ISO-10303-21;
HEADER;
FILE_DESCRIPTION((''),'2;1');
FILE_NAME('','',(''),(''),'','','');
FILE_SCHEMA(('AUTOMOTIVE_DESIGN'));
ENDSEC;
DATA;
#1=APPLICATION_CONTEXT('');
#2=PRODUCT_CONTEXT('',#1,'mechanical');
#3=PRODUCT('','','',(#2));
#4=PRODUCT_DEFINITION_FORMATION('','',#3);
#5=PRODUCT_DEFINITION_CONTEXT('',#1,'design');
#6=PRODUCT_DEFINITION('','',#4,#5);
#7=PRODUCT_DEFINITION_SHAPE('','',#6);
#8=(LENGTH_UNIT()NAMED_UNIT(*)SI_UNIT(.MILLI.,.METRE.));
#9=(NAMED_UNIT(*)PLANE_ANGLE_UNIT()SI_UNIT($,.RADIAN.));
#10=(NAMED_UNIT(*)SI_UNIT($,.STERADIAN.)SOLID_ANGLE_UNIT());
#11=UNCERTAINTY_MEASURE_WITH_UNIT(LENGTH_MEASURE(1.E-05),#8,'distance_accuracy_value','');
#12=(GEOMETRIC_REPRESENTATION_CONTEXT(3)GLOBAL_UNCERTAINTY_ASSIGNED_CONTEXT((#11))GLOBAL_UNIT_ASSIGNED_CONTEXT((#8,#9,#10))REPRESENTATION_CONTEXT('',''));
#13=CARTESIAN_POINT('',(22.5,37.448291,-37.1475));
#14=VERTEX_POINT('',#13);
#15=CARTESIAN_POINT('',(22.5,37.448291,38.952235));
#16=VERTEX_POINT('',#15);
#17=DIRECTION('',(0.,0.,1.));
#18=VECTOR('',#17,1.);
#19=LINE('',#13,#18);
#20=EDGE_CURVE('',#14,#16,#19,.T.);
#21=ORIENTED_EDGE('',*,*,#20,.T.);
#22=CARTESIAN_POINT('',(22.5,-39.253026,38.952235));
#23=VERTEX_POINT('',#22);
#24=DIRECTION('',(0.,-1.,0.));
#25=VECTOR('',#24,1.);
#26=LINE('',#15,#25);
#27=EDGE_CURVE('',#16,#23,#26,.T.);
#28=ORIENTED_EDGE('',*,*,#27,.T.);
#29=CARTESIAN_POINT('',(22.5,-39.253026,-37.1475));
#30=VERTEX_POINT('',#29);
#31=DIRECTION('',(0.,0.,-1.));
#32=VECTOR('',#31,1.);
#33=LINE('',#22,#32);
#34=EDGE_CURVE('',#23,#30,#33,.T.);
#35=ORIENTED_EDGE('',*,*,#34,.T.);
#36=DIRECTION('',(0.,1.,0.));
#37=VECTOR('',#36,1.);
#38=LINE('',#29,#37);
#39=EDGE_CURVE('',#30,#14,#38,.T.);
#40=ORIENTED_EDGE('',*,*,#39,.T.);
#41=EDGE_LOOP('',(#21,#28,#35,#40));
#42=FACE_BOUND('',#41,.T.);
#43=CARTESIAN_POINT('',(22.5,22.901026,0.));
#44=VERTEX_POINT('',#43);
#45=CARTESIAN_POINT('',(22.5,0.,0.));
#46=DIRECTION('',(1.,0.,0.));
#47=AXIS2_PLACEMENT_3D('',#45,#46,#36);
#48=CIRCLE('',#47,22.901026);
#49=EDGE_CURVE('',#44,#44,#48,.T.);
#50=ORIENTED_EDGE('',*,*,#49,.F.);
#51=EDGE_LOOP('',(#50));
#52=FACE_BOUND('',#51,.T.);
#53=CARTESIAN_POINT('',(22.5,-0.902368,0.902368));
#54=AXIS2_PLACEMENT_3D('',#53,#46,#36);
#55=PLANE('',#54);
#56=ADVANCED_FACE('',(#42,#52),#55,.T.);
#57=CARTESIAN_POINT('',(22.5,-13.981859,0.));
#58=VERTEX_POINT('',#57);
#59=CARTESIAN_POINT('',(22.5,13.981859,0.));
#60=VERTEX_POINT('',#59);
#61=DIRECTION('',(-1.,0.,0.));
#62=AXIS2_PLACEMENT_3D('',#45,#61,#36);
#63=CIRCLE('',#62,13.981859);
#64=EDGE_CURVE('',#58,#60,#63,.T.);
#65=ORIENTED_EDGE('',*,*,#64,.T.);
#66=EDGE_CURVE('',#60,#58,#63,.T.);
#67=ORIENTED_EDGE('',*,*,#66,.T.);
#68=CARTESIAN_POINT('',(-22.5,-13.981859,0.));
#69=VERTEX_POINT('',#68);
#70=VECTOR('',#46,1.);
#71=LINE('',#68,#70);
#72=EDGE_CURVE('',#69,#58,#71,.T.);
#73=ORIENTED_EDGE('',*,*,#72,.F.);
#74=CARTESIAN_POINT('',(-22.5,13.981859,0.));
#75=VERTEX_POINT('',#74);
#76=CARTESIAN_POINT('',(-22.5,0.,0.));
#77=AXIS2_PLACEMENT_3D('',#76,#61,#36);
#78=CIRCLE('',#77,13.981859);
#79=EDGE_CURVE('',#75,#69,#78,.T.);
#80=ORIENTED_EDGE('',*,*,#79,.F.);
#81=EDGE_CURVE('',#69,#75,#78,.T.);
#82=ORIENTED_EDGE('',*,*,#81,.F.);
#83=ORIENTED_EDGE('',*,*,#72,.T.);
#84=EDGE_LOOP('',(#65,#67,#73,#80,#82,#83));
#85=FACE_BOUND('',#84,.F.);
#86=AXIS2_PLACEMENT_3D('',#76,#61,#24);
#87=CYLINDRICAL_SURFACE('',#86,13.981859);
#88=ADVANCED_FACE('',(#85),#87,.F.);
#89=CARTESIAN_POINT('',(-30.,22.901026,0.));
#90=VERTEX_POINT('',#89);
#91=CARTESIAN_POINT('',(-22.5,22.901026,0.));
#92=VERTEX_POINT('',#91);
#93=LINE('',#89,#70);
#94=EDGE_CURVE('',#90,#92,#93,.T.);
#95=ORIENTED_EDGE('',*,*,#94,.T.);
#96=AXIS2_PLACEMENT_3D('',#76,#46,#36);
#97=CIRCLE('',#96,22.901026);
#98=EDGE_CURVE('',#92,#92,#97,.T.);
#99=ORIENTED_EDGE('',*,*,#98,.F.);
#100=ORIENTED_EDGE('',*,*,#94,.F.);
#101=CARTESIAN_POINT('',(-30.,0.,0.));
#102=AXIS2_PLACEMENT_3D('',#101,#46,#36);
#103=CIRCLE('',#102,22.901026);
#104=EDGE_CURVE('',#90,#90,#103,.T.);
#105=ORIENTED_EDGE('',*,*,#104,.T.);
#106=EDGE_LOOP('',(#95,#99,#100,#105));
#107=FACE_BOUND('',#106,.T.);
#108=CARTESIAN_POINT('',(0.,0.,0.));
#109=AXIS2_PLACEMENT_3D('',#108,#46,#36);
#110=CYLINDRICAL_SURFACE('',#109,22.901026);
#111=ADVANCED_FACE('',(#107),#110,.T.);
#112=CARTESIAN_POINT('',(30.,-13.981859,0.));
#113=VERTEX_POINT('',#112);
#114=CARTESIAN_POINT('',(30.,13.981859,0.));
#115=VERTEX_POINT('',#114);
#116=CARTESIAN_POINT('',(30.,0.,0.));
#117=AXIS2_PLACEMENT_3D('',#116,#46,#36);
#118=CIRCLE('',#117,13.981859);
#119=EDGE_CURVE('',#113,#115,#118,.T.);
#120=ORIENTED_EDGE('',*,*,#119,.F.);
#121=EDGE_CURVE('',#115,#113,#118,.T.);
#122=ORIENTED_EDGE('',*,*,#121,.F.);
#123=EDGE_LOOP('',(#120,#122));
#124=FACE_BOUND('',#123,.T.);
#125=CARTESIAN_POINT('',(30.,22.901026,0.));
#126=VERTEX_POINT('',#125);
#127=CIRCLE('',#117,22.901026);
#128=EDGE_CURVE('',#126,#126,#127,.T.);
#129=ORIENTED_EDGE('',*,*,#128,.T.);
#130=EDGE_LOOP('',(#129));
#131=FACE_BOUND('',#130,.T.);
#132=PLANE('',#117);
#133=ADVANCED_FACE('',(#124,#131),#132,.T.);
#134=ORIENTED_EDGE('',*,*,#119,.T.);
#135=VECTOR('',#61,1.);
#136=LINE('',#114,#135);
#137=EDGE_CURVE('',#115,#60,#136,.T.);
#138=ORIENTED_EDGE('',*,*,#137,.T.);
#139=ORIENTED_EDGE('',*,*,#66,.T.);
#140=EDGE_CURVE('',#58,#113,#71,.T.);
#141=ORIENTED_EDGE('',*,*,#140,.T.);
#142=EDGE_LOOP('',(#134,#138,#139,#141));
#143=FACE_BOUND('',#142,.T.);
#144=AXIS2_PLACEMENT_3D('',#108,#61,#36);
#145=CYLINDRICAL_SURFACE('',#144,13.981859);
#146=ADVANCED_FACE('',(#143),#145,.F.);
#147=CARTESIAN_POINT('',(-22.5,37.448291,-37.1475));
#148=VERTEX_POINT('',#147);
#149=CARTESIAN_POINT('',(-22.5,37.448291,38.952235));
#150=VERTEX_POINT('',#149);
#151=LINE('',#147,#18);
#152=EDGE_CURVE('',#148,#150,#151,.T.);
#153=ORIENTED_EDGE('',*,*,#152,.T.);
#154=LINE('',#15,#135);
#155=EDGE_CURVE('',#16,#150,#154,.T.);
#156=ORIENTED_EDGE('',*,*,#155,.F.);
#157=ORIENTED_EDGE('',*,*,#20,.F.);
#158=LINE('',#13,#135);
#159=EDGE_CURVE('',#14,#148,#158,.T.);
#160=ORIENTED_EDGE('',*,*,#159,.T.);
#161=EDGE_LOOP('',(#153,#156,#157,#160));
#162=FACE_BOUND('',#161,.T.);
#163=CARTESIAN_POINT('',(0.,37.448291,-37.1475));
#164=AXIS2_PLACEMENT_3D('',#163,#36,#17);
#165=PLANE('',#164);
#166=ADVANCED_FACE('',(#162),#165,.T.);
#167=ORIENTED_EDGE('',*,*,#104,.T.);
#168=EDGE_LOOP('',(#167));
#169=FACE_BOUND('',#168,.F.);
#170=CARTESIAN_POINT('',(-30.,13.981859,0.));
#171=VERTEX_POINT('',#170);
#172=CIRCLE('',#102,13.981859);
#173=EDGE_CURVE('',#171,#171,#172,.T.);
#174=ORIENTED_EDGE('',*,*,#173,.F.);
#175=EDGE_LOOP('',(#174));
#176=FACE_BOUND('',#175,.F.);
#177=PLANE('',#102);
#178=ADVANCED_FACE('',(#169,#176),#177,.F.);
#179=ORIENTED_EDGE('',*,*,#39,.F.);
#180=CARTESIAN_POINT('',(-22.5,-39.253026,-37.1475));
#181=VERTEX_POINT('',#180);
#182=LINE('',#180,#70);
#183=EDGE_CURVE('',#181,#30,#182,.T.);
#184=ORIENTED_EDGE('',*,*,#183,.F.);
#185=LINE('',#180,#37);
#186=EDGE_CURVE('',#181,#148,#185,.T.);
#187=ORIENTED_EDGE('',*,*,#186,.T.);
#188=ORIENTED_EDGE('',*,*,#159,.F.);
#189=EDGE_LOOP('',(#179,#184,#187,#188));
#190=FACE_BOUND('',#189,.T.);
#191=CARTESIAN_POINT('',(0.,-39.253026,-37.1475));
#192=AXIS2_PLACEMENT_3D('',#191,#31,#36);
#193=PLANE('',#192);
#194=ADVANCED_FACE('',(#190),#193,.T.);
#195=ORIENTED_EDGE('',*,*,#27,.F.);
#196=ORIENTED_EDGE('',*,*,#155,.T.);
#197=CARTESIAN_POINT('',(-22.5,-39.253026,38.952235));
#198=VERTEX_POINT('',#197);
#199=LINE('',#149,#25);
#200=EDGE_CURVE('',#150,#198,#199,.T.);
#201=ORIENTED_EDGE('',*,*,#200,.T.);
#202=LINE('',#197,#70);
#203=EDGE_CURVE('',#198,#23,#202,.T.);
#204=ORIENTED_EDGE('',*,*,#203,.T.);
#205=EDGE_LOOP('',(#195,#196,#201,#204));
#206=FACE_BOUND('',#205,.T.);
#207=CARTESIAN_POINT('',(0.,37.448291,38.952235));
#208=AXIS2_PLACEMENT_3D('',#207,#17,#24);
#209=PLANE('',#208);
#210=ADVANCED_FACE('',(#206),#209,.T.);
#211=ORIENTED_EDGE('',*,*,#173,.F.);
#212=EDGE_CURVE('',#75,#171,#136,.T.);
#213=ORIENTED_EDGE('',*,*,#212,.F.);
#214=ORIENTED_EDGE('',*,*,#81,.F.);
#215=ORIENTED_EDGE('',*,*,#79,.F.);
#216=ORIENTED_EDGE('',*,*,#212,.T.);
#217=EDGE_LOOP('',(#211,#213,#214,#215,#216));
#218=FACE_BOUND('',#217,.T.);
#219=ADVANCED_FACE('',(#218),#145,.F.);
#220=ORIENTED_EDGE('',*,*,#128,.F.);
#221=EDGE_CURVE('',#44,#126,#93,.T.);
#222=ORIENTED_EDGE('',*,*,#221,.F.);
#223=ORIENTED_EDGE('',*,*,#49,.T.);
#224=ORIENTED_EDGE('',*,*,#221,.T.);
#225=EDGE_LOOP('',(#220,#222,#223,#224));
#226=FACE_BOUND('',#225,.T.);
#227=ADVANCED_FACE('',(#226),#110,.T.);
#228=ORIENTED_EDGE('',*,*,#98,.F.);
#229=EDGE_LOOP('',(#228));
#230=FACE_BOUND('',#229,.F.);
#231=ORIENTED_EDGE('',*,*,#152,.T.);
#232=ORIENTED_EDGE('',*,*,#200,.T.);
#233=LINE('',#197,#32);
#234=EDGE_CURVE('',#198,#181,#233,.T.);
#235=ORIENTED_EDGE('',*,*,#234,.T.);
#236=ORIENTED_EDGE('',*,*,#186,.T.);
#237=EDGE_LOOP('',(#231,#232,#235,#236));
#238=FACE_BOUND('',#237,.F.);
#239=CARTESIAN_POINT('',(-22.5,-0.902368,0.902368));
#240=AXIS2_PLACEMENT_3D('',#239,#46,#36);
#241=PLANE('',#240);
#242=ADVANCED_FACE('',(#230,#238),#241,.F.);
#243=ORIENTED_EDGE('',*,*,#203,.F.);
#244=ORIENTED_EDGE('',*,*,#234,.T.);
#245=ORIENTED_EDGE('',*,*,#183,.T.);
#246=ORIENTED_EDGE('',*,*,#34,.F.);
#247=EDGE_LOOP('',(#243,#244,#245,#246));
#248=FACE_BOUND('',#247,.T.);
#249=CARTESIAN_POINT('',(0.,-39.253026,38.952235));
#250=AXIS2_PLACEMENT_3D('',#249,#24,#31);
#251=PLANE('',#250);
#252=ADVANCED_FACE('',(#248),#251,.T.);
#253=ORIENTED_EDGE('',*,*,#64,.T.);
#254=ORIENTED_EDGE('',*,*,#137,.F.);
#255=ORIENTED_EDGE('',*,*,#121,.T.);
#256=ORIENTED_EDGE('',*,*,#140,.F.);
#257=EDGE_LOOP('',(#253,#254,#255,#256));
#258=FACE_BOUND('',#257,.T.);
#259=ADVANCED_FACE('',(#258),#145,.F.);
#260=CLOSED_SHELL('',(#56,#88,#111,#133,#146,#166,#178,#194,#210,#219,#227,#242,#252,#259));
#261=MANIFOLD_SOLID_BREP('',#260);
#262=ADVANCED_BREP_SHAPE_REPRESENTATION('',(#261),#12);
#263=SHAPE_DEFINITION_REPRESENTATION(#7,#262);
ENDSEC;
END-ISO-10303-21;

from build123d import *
from build123d import SkipClean  # not in build123d's __all__

# Parameters (mm, degrees)
F0_R     = 22.9010259121
F0_R_2   = 13.9818591187
F1_DEPTH = 30
F3_DEPTH = 22.5
F4_R     = 13.9818591187
F5_DEPTH = 52.501


with BuildPart() as f1:
    # F0 (on Right) → F1 (new body, symmetric)
    with BuildSketch(Plane.YZ):
        Circle(F0_R)
        Circle(F0_R_2, mode=Mode.SUBTRACT)
    extrude(amount=F1_DEPTH, both=True)

    # F2 (on Right) → F3 (join, symmetric)
    with BuildSketch(Plane.YZ):
        Polygon((37.4482907355, 38.9522351325), (0, 38.9522351325), (-39.253026247, 38.9522351325), (-39.253026247, -37.1474996209), (37.4482907355, -37.1474996209), align=None)
    extrude(amount=F3_DEPTH, both=True)

    # F4 (on face) → F5 (cut, through all)
    with BuildSketch(Plane(origin=(-22.5, 0, 0), x_dir=(0, -1, 0), z_dir=(-1, 0, 0))):
        Circle(F4_R)
    with SkipClean():  # cleaning this boolean's faces spoils the solid; the shape is the same uncleaned
        extrude(amount=-F5_DEPTH, mode=Mode.SUBTRACT)


solid = f1.part
